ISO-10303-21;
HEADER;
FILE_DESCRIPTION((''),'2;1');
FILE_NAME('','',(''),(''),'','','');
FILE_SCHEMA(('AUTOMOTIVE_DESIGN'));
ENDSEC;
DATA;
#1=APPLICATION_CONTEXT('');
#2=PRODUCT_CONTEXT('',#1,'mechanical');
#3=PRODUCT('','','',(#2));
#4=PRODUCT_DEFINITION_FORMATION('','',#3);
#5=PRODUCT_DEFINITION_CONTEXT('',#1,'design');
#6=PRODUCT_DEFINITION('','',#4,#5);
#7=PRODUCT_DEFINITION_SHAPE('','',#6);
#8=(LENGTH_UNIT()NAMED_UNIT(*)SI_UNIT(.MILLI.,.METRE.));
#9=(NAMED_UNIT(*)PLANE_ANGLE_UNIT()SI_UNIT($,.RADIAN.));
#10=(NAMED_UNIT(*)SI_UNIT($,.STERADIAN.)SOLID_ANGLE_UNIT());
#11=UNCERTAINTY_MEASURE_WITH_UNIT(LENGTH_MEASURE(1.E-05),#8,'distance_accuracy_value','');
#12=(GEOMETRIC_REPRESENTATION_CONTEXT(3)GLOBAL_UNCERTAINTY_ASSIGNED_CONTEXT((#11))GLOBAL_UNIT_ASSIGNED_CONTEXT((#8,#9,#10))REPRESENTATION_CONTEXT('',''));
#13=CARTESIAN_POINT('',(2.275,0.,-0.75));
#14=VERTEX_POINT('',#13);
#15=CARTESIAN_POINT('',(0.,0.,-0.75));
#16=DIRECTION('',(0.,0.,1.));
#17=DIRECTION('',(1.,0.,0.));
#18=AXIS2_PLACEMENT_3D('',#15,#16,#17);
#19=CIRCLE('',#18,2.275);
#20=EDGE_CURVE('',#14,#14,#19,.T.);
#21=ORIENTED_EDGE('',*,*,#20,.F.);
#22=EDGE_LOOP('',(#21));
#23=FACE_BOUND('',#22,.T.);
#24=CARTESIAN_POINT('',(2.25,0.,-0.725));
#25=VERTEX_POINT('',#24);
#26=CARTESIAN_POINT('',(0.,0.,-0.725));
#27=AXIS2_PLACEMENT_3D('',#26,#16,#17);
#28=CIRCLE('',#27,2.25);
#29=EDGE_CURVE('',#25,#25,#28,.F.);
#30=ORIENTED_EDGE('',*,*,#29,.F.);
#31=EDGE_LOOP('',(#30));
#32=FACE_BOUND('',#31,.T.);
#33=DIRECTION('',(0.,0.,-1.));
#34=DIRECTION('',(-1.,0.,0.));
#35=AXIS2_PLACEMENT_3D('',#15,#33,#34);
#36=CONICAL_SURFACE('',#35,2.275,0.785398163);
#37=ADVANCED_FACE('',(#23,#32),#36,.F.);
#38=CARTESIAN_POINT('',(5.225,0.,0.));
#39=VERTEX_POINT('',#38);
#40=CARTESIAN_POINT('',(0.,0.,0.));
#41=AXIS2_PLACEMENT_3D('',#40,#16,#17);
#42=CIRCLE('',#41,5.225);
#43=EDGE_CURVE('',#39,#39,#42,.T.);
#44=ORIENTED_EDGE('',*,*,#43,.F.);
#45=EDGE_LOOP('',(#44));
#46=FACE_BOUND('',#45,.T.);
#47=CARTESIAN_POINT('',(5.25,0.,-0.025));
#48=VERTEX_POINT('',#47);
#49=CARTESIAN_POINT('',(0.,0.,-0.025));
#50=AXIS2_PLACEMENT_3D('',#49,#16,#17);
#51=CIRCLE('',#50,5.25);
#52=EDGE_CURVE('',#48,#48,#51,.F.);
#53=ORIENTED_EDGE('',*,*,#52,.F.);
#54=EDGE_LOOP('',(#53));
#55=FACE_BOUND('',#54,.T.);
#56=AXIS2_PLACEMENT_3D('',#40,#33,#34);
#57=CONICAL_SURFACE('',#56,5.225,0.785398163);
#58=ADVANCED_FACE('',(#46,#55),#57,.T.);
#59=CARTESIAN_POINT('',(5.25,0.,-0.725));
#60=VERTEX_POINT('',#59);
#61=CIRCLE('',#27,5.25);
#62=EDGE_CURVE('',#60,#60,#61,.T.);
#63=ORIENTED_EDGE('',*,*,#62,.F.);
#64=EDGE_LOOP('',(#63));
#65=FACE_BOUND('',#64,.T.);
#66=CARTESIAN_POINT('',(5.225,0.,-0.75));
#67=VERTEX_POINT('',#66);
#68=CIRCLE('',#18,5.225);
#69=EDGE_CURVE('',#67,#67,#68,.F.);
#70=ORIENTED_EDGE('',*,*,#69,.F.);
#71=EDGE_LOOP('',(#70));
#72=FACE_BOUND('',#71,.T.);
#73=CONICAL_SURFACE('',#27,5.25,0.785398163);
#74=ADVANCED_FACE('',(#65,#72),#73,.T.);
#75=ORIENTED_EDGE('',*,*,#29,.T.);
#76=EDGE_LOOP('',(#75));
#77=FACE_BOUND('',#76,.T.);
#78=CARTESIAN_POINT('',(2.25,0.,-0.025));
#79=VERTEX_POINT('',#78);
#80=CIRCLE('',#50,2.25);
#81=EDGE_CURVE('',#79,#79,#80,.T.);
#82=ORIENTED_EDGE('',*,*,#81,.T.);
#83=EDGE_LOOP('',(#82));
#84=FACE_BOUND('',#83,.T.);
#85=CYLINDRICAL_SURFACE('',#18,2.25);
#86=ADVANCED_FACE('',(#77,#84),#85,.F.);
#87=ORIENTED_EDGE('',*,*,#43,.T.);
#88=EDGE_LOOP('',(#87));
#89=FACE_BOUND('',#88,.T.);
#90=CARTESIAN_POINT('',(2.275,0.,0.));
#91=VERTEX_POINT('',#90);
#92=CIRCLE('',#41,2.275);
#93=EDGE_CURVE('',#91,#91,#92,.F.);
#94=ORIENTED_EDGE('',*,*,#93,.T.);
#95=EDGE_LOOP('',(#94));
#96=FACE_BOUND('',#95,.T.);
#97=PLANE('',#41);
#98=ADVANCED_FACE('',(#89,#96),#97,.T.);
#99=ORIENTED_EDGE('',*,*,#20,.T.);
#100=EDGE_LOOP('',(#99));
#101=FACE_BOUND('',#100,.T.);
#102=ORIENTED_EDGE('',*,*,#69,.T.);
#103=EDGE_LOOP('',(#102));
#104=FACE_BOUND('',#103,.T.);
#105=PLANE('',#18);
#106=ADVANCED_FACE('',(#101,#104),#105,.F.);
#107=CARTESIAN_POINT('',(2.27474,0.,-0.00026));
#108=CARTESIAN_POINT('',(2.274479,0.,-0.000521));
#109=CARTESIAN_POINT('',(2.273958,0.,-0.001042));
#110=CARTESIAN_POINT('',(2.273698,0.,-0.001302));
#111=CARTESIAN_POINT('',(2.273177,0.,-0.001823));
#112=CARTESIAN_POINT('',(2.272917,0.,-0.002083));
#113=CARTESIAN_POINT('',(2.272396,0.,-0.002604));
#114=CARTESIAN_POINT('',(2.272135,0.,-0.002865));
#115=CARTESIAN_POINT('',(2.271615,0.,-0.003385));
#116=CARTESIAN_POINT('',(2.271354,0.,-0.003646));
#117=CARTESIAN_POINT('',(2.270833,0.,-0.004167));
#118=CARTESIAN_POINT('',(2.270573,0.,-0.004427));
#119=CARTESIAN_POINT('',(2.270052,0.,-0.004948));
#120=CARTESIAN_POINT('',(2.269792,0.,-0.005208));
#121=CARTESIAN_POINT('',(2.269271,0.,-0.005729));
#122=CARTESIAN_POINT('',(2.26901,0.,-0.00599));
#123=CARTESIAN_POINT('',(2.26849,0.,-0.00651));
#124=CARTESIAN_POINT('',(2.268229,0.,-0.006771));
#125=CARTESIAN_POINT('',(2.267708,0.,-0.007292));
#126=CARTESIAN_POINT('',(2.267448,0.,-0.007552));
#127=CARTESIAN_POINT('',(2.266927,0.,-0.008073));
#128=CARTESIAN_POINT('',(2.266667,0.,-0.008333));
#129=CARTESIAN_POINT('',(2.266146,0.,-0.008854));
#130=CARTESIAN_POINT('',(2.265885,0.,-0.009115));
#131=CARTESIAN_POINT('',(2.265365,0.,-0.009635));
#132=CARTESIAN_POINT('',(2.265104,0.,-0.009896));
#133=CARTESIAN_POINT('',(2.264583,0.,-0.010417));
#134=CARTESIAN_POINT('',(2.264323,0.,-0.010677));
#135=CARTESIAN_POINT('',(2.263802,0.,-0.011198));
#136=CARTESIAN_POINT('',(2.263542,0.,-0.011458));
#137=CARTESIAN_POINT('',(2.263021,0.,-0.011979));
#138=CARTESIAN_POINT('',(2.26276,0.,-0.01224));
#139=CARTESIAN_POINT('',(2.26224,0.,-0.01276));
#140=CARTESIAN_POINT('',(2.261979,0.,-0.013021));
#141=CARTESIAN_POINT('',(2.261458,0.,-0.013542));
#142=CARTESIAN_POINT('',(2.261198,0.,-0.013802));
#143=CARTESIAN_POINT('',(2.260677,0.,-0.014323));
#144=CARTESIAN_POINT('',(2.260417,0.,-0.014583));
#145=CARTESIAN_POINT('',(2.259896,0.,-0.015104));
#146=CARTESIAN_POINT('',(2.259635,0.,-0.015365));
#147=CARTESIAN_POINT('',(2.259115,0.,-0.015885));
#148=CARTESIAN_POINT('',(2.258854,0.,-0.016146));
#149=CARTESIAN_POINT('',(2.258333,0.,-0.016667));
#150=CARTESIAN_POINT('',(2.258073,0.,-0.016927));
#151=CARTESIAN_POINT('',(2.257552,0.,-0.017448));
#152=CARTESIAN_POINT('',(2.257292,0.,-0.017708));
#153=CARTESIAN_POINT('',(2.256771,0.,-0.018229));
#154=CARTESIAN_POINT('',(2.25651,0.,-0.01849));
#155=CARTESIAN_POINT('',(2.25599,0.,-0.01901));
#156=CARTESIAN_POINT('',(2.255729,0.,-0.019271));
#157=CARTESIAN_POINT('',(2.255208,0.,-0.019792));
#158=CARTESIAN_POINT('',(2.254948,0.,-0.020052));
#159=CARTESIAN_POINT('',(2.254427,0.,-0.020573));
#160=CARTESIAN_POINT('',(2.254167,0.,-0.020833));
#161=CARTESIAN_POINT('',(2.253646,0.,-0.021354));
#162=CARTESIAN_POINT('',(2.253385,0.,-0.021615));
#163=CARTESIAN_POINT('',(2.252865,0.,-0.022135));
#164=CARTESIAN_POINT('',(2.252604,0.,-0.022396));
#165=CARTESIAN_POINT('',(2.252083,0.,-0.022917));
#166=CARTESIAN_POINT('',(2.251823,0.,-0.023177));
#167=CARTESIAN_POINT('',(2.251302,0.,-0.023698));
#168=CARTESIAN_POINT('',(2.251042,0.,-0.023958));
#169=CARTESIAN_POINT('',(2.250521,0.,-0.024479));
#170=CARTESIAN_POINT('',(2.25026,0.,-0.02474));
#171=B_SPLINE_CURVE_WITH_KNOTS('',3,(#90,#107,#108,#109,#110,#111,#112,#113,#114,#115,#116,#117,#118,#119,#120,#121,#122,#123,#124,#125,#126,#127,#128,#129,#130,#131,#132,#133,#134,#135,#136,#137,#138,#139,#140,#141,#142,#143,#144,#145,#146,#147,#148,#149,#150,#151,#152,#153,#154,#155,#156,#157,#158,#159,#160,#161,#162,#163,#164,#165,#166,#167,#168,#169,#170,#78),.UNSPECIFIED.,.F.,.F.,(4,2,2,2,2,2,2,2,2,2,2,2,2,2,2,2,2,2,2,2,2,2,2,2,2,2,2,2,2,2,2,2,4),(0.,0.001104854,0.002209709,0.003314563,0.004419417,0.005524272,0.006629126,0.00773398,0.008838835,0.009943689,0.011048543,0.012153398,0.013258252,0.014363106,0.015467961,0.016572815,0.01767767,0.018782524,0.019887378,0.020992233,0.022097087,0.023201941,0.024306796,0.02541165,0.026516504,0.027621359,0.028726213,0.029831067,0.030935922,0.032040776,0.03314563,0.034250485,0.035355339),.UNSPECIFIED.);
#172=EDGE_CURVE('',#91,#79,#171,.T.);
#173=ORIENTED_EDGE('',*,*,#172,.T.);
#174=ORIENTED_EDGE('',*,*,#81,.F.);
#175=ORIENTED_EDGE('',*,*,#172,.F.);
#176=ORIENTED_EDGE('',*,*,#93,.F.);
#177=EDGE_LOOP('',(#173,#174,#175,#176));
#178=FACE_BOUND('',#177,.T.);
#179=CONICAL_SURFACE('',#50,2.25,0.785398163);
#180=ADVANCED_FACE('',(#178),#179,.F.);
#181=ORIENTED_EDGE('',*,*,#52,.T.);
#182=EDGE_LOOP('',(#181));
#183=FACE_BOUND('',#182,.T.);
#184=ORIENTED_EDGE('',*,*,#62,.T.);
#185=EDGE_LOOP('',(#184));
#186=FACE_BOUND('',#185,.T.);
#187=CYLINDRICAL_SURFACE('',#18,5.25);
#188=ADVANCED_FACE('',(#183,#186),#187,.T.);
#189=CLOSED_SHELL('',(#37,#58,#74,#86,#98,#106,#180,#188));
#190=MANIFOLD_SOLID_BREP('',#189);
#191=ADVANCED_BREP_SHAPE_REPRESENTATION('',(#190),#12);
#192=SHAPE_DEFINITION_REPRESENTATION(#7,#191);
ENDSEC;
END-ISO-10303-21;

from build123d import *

# Parameters (mm, degrees)
SKETCH1_R          = 5.25
SKETCH1_R_2        = 2.25
BASE_FLANGE1_DEPTH = 0.75
CHAMFER1_SIZE      = 0.025


# Sheet-metal steps are written as plain solids
with BuildPart() as part:
    # Sketch1 → Base-Flange1 (new body)
    with BuildSketch(Plane.XY):
        Circle(SKETCH1_R)
        Circle(SKETCH1_R_2, mode=Mode.SUBTRACT)
    extrude(amount=-BASE_FLANGE1_DEPTH)

    # Chamfer1
    chamfer1_edges = [part.edges().sort_by_distance(p)[0] for p in [
        (-5.25, 0, 0),
        (-5.25, 0, -0.75),
        (-2.25, 0, -0.75),
        (-2.25, 0, 0),
    ]]
    chamfer(chamfer1_edges, length=CHAMFER1_SIZE)


solid = part.part
